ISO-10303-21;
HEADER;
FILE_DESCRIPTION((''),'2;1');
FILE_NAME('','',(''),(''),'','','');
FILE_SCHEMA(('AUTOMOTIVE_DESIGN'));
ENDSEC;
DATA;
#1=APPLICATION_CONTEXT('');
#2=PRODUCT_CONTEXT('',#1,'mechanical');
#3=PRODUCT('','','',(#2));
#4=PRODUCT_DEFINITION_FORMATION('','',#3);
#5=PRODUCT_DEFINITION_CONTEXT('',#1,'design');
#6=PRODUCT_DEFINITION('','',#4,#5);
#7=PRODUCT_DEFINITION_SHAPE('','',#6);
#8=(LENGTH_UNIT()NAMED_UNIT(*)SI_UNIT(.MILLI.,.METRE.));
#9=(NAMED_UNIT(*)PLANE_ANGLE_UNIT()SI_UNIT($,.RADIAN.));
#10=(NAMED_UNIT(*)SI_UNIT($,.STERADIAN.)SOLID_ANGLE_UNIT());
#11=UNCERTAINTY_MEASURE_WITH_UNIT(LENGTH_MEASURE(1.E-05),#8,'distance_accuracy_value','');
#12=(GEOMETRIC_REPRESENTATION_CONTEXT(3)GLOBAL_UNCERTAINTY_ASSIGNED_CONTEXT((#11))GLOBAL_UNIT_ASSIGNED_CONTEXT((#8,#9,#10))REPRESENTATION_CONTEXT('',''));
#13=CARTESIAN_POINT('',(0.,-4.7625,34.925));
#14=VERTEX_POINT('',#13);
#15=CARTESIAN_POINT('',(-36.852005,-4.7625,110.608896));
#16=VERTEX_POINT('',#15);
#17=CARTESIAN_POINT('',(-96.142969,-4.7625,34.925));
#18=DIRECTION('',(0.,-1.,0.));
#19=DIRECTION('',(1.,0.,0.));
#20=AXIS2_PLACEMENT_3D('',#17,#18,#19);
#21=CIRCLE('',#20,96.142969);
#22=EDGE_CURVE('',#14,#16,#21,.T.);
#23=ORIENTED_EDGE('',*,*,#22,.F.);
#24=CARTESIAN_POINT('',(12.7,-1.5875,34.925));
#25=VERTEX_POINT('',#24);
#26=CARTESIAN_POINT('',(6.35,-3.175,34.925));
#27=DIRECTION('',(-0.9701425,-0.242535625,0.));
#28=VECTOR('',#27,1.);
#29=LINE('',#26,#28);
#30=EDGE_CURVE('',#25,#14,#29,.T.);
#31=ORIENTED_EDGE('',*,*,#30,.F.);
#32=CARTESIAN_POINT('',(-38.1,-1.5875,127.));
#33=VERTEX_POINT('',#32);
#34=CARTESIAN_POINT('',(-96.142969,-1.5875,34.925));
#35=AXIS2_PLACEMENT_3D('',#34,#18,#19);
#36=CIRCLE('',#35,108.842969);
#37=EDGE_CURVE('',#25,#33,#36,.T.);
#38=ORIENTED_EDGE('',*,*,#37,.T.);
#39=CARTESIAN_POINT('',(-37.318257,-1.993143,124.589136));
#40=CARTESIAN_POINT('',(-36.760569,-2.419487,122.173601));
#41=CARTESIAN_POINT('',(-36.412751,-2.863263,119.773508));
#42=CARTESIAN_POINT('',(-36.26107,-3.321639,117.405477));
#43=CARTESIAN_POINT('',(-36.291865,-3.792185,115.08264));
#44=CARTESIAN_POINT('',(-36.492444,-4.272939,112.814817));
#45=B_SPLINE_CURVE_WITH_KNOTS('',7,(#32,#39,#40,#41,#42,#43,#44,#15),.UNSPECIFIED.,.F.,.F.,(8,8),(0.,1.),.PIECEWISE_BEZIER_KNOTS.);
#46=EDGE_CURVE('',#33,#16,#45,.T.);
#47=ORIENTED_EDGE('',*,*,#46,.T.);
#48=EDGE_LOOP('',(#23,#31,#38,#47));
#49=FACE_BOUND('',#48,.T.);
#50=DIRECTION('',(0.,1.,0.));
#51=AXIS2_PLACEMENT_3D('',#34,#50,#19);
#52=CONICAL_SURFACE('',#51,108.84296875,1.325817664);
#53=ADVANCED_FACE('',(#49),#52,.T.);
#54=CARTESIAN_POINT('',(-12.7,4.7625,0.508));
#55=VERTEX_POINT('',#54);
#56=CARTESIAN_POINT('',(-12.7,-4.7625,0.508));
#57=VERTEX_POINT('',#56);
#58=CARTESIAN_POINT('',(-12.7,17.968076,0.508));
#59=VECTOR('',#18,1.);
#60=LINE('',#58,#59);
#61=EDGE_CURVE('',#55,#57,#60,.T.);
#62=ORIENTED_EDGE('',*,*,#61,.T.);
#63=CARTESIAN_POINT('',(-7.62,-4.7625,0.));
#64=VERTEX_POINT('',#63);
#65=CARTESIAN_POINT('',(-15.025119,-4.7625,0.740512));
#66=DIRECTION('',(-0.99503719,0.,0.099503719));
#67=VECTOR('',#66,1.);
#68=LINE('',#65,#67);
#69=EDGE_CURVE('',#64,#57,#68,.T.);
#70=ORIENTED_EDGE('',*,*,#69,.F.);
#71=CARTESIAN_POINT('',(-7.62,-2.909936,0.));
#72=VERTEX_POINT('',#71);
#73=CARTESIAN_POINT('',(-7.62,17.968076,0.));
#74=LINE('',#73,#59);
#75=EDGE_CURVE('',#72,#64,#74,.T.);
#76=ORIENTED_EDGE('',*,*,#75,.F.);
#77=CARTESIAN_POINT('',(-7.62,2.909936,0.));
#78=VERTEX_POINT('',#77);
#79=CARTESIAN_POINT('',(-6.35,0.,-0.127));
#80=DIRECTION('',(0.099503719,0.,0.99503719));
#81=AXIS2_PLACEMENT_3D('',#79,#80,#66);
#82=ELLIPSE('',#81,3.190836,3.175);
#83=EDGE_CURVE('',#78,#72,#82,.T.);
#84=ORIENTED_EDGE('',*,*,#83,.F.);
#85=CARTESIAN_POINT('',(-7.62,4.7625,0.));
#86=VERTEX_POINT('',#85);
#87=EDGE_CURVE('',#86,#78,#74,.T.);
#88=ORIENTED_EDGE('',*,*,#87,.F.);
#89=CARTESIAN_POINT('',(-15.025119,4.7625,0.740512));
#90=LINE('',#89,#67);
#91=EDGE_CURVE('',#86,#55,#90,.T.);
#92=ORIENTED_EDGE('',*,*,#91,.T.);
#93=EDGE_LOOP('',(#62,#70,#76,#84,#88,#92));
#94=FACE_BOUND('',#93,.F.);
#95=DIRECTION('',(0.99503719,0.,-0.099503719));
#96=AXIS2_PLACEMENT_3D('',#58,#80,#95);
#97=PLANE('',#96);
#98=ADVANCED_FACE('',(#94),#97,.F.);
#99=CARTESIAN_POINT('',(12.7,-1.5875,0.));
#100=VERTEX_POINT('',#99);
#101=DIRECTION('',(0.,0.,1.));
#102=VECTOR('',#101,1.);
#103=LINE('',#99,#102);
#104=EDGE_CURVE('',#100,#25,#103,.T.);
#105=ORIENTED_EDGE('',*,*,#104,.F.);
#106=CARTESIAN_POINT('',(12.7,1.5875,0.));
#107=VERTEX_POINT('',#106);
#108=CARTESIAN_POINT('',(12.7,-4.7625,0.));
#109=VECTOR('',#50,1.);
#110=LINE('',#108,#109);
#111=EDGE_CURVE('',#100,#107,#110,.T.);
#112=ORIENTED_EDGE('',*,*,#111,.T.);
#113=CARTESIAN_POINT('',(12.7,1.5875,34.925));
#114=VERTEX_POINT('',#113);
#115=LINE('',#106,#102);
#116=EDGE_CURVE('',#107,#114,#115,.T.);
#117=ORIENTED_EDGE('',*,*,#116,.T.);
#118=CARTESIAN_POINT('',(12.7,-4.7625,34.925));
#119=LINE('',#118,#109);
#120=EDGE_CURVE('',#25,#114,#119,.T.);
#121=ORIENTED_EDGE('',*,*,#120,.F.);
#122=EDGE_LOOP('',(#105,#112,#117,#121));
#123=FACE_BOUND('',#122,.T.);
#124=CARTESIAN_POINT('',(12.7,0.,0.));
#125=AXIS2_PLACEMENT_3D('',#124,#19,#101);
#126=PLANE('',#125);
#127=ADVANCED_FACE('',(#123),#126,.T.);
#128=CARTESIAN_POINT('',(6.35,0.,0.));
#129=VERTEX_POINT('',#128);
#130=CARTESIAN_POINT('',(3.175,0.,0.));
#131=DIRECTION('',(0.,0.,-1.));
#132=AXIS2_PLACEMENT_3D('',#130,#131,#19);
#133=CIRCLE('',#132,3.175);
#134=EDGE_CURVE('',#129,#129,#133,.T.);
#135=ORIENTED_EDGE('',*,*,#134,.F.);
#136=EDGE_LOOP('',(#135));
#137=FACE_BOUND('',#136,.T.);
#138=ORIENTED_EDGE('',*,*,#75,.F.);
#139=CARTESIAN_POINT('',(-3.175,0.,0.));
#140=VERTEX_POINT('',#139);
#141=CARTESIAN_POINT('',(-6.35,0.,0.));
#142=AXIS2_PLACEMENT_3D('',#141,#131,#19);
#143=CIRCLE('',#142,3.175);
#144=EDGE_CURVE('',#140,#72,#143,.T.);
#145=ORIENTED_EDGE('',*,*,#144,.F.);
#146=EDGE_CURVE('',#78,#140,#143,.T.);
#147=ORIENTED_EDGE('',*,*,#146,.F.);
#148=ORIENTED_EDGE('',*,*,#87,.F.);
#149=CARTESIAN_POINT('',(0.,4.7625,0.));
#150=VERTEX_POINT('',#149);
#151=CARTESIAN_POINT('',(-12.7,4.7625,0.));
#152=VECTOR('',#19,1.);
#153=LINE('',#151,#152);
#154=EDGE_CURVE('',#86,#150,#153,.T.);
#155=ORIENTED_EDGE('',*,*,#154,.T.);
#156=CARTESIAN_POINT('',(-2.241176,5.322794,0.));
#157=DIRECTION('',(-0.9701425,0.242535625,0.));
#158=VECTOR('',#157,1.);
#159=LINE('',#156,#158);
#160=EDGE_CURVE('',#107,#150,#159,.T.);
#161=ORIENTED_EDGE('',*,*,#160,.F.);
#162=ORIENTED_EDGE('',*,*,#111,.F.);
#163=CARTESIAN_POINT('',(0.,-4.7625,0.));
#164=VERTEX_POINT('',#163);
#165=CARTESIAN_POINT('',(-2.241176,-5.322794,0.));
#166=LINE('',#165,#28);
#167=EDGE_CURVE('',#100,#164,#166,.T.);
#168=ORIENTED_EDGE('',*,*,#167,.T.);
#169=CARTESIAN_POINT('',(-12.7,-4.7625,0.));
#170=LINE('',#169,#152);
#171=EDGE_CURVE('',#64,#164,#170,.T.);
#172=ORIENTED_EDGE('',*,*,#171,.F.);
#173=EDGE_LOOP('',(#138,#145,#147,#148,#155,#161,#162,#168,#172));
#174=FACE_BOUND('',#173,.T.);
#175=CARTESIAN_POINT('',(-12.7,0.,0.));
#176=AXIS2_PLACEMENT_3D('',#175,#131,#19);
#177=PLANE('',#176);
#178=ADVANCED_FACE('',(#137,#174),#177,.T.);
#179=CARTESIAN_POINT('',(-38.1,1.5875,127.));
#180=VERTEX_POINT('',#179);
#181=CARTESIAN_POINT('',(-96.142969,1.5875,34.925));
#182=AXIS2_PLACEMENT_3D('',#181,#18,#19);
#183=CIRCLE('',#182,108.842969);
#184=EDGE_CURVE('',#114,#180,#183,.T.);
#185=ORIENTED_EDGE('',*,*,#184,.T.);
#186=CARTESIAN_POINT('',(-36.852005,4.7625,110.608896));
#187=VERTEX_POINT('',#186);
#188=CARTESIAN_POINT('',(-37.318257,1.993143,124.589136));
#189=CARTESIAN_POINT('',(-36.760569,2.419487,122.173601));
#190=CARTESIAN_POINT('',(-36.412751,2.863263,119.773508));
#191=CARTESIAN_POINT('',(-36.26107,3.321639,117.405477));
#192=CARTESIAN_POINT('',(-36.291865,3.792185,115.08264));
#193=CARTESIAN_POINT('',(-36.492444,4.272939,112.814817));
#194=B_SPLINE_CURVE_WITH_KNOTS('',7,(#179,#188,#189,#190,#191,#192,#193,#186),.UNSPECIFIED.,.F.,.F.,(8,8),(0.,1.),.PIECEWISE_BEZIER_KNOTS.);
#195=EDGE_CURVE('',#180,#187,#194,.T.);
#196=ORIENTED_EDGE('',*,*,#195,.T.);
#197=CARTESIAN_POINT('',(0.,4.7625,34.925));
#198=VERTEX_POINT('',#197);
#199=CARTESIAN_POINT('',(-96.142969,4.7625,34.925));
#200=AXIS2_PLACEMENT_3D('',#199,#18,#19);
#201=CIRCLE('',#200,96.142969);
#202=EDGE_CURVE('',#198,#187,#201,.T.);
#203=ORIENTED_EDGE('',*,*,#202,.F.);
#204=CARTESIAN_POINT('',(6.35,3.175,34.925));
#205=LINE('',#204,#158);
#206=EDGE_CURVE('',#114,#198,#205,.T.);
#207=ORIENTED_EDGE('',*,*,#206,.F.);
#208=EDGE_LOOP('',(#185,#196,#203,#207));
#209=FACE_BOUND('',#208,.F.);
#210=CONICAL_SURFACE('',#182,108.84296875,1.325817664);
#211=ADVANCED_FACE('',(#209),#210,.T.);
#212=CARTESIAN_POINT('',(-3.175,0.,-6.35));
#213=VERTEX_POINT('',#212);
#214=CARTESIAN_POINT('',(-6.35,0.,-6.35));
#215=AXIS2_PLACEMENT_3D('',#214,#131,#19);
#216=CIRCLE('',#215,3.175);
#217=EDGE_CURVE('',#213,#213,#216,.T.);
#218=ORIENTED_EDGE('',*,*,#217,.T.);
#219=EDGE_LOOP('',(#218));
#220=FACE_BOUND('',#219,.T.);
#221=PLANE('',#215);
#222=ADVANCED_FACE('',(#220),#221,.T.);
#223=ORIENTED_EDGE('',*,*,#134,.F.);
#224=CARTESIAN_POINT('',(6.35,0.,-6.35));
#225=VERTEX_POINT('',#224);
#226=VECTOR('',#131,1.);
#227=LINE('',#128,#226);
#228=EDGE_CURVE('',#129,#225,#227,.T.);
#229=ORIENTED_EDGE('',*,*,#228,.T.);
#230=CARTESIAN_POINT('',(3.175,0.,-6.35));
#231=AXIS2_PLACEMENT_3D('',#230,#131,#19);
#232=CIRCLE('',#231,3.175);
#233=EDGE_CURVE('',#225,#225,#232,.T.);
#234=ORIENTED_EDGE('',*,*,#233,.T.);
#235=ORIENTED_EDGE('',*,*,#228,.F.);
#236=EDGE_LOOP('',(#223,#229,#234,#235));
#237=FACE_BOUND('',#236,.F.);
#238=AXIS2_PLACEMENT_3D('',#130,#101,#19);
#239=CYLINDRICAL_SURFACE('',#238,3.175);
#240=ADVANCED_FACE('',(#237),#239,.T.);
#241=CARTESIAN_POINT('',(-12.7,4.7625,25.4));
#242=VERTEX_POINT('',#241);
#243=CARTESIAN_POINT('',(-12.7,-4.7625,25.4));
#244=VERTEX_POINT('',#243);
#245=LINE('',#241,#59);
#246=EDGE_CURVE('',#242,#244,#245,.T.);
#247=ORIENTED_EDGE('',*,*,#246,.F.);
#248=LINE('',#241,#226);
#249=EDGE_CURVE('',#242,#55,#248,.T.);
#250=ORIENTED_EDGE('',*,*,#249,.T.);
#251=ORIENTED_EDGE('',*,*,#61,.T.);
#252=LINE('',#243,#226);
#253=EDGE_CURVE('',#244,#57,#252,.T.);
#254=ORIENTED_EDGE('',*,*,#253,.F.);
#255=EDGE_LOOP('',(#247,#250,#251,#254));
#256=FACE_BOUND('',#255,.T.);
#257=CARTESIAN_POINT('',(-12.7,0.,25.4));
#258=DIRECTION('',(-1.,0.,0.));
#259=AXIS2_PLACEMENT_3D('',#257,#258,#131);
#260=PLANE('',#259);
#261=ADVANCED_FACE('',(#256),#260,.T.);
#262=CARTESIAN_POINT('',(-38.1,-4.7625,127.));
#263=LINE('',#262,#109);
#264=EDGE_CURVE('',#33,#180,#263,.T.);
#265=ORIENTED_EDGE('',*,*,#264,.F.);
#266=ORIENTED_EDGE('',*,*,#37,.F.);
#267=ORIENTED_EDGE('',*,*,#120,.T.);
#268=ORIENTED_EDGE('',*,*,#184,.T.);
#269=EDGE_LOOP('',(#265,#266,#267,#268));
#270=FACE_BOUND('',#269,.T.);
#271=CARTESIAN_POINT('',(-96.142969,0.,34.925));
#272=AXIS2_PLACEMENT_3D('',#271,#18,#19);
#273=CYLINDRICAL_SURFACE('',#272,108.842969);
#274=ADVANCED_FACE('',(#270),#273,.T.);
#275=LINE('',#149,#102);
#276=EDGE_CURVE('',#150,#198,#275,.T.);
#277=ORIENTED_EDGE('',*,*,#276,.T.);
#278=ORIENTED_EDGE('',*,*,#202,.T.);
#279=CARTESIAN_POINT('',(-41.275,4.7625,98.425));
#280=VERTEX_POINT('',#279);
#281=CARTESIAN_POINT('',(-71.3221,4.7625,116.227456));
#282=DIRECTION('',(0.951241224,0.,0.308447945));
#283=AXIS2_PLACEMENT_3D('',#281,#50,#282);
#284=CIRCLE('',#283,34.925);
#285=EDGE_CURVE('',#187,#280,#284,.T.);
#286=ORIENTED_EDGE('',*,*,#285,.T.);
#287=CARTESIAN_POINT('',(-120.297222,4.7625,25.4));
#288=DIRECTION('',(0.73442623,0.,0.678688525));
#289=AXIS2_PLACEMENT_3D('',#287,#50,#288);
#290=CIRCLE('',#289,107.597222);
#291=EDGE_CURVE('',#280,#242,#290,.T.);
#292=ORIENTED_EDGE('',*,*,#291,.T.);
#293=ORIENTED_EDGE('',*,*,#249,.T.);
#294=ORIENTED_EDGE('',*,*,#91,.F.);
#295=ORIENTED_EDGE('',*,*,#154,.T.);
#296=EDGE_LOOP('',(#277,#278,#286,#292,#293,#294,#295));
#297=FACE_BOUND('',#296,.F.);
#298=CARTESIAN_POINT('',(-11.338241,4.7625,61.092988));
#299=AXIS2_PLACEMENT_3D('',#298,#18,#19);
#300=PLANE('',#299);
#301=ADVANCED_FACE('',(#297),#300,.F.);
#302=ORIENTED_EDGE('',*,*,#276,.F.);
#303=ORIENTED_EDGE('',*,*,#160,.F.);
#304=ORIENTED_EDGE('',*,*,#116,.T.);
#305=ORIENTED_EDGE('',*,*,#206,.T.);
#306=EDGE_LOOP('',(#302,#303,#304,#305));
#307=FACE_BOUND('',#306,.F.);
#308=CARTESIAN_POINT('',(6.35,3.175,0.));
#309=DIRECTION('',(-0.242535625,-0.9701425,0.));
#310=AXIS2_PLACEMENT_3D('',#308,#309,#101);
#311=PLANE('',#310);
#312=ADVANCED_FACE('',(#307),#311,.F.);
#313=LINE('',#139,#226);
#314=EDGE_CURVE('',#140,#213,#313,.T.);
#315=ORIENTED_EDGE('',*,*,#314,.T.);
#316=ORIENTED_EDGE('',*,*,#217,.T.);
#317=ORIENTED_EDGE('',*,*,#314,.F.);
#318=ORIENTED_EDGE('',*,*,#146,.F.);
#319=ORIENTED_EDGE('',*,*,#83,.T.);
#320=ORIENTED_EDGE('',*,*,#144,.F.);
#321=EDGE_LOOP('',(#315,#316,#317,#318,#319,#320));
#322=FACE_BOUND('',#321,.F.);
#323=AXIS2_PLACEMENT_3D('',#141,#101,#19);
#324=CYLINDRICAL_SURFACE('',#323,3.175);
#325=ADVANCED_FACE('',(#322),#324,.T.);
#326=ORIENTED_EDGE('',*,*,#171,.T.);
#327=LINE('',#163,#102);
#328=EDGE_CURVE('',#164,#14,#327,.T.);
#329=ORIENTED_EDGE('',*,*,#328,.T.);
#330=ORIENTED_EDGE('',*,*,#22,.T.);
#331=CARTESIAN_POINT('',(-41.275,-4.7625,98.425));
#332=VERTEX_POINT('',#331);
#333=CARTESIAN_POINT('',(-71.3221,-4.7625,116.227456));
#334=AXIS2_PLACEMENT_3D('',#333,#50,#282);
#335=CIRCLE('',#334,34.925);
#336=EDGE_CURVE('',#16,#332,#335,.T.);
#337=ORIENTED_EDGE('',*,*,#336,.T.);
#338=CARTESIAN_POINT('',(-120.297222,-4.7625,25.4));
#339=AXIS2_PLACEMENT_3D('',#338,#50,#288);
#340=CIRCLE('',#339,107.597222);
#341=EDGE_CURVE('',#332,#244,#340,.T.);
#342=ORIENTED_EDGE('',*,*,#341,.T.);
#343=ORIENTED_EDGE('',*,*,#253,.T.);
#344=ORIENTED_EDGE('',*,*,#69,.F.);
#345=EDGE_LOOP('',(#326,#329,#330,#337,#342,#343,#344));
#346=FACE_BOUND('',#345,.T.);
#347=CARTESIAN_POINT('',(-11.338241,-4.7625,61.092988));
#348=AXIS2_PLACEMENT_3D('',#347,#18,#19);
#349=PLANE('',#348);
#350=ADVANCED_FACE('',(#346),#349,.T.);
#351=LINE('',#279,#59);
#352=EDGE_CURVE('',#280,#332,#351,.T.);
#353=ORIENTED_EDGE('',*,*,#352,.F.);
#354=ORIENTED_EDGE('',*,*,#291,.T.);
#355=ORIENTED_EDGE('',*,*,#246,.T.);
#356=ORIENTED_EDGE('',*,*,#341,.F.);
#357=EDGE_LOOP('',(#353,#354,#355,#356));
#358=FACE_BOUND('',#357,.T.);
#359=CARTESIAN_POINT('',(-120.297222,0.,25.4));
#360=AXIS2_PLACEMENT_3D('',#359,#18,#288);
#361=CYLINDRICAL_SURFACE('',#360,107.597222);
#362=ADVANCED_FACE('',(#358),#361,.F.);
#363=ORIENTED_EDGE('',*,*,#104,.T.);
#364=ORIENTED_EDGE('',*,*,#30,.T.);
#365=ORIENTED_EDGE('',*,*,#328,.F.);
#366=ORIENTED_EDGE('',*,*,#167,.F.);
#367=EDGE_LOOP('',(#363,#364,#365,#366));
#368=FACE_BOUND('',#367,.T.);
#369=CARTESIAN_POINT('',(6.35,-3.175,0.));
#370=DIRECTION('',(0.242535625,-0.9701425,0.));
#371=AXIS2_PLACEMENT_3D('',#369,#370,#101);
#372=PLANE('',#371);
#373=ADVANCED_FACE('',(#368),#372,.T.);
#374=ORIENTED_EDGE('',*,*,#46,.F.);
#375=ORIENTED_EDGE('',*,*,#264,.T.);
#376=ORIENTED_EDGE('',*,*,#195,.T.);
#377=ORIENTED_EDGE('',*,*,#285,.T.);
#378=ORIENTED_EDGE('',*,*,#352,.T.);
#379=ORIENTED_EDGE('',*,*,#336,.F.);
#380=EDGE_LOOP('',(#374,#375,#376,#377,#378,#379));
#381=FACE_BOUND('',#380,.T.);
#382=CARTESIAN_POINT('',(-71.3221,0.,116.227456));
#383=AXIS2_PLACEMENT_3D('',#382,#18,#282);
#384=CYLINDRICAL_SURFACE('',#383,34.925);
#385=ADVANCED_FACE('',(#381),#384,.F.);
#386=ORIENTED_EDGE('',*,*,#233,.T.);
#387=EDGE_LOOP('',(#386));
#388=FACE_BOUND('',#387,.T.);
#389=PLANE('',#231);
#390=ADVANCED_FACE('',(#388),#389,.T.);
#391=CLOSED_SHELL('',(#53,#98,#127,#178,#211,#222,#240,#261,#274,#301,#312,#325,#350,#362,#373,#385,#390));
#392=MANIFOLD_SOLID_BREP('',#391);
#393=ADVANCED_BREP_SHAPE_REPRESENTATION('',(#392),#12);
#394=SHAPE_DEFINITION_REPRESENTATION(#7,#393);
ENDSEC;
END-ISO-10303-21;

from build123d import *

# Parameters (mm, degrees)
F1_DEPTH    = 4.7625
F2_SIZE2    = 12.7
F2_SIZE     = 3.175
F3_SIZE2    = 12.7
F3_SIZE     = 3.175
F4_R        = 3.175
F5_DEPTH    = 6.35
F6_T4_DEPTH = 35.9361512716
F6_S5_R     = 3.175
F6_T6_DEPTH = 20


# Not quite as in the source:
# - a fillet or chamfer that OpenCascade refuses, or shapes differently, is made with other operations: its cross-section is extruded or revolved along the edge and cut away or added


with BuildPart() as f1:
    # F0 (on Front) → F1 (new body, symmetric)
    with BuildSketch(Plane.XZ):
        with BuildLine():
            ThreePointArc((-38.1, 127), (-36.6107102977, 112.3706344775), (-41.275, 98.425))
            ThreePointArc((-41.275, 98.425), (-20.0980859114, 64.6083576869), (-12.7, 25.4))
            Line((-12.7, 25.4), (-12.7, 0))
            Line((-12.7, 0), (12.7, 0))
            Line((12.7, 0), (12.7, 34.925))
            ThreePointArc((12.7, 34.925), (-0.8424942493, 87.5045721383), (-38.1, 127))
        make_face()
    extrude(amount=F1_DEPTH, both=True)

    # F2
    f2_edges = [f1.edges().sort_by_distance(p)[0] for p in [
        (-0.842494, -4.7625, 87.504572),
        (12.7, -4.7625, 17.4625),
    ]]
    chamfer(f2_edges, length=F2_SIZE, length2=F2_SIZE2)

    # F3
    f3_edges = [f1.edges().sort_by_distance(p)[0] for p in [
        (-0.842494, 4.7625, 87.504572),
    ]]
    f3_side = f1.faces().sort_by_distance((-0.842494, 1.5875, 87.504572))[0]
    chamfer(f3_edges, length=F3_SIZE, length2=F3_SIZE2, reference=f3_side)

    # F4 (on face) → F5 (join)
    with BuildSketch(Plane(origin=(0, 0, 0), x_dir=(1, 0, 0), z_dir=(0, 0, -1))):
        with Locations((-6.35, 0)):
            Circle(F4_R)
        with Locations((3.175, 0)):
            Circle(F4_R)
    extrude(amount=F5_DEPTH)

    # F6: chamfer of 0.508 x 5.08 on 1 edges, made by hand


with BuildPart() as f6_tool2:
    # F6_s3 → F6_t4 (new body)
    with BuildSketch(Plane.XZ.offset(-17.9680756358)):
        Polygon((-12.7, 0.508), (-7.62, 0), (-12.7, 0), align=None)
    extrude(amount=F6_T4_DEPTH)

    # F6_s5 → F6_t6 (cut, symmetric)
    with BuildSketch(Plane.XY.offset(0.3)):
        with Locations((-6.35, 0)):
            Circle(F6_S5_R)
    extrude(amount=F6_T6_DEPTH, both=True, mode=Mode.SUBTRACT)


with BuildPart() as f1_1:
    add(f1.part)

    # F6_t1: cut F6_tool2
    add(f6_tool2.part, mode=Mode.SUBTRACT)


solid = f1_1.part
